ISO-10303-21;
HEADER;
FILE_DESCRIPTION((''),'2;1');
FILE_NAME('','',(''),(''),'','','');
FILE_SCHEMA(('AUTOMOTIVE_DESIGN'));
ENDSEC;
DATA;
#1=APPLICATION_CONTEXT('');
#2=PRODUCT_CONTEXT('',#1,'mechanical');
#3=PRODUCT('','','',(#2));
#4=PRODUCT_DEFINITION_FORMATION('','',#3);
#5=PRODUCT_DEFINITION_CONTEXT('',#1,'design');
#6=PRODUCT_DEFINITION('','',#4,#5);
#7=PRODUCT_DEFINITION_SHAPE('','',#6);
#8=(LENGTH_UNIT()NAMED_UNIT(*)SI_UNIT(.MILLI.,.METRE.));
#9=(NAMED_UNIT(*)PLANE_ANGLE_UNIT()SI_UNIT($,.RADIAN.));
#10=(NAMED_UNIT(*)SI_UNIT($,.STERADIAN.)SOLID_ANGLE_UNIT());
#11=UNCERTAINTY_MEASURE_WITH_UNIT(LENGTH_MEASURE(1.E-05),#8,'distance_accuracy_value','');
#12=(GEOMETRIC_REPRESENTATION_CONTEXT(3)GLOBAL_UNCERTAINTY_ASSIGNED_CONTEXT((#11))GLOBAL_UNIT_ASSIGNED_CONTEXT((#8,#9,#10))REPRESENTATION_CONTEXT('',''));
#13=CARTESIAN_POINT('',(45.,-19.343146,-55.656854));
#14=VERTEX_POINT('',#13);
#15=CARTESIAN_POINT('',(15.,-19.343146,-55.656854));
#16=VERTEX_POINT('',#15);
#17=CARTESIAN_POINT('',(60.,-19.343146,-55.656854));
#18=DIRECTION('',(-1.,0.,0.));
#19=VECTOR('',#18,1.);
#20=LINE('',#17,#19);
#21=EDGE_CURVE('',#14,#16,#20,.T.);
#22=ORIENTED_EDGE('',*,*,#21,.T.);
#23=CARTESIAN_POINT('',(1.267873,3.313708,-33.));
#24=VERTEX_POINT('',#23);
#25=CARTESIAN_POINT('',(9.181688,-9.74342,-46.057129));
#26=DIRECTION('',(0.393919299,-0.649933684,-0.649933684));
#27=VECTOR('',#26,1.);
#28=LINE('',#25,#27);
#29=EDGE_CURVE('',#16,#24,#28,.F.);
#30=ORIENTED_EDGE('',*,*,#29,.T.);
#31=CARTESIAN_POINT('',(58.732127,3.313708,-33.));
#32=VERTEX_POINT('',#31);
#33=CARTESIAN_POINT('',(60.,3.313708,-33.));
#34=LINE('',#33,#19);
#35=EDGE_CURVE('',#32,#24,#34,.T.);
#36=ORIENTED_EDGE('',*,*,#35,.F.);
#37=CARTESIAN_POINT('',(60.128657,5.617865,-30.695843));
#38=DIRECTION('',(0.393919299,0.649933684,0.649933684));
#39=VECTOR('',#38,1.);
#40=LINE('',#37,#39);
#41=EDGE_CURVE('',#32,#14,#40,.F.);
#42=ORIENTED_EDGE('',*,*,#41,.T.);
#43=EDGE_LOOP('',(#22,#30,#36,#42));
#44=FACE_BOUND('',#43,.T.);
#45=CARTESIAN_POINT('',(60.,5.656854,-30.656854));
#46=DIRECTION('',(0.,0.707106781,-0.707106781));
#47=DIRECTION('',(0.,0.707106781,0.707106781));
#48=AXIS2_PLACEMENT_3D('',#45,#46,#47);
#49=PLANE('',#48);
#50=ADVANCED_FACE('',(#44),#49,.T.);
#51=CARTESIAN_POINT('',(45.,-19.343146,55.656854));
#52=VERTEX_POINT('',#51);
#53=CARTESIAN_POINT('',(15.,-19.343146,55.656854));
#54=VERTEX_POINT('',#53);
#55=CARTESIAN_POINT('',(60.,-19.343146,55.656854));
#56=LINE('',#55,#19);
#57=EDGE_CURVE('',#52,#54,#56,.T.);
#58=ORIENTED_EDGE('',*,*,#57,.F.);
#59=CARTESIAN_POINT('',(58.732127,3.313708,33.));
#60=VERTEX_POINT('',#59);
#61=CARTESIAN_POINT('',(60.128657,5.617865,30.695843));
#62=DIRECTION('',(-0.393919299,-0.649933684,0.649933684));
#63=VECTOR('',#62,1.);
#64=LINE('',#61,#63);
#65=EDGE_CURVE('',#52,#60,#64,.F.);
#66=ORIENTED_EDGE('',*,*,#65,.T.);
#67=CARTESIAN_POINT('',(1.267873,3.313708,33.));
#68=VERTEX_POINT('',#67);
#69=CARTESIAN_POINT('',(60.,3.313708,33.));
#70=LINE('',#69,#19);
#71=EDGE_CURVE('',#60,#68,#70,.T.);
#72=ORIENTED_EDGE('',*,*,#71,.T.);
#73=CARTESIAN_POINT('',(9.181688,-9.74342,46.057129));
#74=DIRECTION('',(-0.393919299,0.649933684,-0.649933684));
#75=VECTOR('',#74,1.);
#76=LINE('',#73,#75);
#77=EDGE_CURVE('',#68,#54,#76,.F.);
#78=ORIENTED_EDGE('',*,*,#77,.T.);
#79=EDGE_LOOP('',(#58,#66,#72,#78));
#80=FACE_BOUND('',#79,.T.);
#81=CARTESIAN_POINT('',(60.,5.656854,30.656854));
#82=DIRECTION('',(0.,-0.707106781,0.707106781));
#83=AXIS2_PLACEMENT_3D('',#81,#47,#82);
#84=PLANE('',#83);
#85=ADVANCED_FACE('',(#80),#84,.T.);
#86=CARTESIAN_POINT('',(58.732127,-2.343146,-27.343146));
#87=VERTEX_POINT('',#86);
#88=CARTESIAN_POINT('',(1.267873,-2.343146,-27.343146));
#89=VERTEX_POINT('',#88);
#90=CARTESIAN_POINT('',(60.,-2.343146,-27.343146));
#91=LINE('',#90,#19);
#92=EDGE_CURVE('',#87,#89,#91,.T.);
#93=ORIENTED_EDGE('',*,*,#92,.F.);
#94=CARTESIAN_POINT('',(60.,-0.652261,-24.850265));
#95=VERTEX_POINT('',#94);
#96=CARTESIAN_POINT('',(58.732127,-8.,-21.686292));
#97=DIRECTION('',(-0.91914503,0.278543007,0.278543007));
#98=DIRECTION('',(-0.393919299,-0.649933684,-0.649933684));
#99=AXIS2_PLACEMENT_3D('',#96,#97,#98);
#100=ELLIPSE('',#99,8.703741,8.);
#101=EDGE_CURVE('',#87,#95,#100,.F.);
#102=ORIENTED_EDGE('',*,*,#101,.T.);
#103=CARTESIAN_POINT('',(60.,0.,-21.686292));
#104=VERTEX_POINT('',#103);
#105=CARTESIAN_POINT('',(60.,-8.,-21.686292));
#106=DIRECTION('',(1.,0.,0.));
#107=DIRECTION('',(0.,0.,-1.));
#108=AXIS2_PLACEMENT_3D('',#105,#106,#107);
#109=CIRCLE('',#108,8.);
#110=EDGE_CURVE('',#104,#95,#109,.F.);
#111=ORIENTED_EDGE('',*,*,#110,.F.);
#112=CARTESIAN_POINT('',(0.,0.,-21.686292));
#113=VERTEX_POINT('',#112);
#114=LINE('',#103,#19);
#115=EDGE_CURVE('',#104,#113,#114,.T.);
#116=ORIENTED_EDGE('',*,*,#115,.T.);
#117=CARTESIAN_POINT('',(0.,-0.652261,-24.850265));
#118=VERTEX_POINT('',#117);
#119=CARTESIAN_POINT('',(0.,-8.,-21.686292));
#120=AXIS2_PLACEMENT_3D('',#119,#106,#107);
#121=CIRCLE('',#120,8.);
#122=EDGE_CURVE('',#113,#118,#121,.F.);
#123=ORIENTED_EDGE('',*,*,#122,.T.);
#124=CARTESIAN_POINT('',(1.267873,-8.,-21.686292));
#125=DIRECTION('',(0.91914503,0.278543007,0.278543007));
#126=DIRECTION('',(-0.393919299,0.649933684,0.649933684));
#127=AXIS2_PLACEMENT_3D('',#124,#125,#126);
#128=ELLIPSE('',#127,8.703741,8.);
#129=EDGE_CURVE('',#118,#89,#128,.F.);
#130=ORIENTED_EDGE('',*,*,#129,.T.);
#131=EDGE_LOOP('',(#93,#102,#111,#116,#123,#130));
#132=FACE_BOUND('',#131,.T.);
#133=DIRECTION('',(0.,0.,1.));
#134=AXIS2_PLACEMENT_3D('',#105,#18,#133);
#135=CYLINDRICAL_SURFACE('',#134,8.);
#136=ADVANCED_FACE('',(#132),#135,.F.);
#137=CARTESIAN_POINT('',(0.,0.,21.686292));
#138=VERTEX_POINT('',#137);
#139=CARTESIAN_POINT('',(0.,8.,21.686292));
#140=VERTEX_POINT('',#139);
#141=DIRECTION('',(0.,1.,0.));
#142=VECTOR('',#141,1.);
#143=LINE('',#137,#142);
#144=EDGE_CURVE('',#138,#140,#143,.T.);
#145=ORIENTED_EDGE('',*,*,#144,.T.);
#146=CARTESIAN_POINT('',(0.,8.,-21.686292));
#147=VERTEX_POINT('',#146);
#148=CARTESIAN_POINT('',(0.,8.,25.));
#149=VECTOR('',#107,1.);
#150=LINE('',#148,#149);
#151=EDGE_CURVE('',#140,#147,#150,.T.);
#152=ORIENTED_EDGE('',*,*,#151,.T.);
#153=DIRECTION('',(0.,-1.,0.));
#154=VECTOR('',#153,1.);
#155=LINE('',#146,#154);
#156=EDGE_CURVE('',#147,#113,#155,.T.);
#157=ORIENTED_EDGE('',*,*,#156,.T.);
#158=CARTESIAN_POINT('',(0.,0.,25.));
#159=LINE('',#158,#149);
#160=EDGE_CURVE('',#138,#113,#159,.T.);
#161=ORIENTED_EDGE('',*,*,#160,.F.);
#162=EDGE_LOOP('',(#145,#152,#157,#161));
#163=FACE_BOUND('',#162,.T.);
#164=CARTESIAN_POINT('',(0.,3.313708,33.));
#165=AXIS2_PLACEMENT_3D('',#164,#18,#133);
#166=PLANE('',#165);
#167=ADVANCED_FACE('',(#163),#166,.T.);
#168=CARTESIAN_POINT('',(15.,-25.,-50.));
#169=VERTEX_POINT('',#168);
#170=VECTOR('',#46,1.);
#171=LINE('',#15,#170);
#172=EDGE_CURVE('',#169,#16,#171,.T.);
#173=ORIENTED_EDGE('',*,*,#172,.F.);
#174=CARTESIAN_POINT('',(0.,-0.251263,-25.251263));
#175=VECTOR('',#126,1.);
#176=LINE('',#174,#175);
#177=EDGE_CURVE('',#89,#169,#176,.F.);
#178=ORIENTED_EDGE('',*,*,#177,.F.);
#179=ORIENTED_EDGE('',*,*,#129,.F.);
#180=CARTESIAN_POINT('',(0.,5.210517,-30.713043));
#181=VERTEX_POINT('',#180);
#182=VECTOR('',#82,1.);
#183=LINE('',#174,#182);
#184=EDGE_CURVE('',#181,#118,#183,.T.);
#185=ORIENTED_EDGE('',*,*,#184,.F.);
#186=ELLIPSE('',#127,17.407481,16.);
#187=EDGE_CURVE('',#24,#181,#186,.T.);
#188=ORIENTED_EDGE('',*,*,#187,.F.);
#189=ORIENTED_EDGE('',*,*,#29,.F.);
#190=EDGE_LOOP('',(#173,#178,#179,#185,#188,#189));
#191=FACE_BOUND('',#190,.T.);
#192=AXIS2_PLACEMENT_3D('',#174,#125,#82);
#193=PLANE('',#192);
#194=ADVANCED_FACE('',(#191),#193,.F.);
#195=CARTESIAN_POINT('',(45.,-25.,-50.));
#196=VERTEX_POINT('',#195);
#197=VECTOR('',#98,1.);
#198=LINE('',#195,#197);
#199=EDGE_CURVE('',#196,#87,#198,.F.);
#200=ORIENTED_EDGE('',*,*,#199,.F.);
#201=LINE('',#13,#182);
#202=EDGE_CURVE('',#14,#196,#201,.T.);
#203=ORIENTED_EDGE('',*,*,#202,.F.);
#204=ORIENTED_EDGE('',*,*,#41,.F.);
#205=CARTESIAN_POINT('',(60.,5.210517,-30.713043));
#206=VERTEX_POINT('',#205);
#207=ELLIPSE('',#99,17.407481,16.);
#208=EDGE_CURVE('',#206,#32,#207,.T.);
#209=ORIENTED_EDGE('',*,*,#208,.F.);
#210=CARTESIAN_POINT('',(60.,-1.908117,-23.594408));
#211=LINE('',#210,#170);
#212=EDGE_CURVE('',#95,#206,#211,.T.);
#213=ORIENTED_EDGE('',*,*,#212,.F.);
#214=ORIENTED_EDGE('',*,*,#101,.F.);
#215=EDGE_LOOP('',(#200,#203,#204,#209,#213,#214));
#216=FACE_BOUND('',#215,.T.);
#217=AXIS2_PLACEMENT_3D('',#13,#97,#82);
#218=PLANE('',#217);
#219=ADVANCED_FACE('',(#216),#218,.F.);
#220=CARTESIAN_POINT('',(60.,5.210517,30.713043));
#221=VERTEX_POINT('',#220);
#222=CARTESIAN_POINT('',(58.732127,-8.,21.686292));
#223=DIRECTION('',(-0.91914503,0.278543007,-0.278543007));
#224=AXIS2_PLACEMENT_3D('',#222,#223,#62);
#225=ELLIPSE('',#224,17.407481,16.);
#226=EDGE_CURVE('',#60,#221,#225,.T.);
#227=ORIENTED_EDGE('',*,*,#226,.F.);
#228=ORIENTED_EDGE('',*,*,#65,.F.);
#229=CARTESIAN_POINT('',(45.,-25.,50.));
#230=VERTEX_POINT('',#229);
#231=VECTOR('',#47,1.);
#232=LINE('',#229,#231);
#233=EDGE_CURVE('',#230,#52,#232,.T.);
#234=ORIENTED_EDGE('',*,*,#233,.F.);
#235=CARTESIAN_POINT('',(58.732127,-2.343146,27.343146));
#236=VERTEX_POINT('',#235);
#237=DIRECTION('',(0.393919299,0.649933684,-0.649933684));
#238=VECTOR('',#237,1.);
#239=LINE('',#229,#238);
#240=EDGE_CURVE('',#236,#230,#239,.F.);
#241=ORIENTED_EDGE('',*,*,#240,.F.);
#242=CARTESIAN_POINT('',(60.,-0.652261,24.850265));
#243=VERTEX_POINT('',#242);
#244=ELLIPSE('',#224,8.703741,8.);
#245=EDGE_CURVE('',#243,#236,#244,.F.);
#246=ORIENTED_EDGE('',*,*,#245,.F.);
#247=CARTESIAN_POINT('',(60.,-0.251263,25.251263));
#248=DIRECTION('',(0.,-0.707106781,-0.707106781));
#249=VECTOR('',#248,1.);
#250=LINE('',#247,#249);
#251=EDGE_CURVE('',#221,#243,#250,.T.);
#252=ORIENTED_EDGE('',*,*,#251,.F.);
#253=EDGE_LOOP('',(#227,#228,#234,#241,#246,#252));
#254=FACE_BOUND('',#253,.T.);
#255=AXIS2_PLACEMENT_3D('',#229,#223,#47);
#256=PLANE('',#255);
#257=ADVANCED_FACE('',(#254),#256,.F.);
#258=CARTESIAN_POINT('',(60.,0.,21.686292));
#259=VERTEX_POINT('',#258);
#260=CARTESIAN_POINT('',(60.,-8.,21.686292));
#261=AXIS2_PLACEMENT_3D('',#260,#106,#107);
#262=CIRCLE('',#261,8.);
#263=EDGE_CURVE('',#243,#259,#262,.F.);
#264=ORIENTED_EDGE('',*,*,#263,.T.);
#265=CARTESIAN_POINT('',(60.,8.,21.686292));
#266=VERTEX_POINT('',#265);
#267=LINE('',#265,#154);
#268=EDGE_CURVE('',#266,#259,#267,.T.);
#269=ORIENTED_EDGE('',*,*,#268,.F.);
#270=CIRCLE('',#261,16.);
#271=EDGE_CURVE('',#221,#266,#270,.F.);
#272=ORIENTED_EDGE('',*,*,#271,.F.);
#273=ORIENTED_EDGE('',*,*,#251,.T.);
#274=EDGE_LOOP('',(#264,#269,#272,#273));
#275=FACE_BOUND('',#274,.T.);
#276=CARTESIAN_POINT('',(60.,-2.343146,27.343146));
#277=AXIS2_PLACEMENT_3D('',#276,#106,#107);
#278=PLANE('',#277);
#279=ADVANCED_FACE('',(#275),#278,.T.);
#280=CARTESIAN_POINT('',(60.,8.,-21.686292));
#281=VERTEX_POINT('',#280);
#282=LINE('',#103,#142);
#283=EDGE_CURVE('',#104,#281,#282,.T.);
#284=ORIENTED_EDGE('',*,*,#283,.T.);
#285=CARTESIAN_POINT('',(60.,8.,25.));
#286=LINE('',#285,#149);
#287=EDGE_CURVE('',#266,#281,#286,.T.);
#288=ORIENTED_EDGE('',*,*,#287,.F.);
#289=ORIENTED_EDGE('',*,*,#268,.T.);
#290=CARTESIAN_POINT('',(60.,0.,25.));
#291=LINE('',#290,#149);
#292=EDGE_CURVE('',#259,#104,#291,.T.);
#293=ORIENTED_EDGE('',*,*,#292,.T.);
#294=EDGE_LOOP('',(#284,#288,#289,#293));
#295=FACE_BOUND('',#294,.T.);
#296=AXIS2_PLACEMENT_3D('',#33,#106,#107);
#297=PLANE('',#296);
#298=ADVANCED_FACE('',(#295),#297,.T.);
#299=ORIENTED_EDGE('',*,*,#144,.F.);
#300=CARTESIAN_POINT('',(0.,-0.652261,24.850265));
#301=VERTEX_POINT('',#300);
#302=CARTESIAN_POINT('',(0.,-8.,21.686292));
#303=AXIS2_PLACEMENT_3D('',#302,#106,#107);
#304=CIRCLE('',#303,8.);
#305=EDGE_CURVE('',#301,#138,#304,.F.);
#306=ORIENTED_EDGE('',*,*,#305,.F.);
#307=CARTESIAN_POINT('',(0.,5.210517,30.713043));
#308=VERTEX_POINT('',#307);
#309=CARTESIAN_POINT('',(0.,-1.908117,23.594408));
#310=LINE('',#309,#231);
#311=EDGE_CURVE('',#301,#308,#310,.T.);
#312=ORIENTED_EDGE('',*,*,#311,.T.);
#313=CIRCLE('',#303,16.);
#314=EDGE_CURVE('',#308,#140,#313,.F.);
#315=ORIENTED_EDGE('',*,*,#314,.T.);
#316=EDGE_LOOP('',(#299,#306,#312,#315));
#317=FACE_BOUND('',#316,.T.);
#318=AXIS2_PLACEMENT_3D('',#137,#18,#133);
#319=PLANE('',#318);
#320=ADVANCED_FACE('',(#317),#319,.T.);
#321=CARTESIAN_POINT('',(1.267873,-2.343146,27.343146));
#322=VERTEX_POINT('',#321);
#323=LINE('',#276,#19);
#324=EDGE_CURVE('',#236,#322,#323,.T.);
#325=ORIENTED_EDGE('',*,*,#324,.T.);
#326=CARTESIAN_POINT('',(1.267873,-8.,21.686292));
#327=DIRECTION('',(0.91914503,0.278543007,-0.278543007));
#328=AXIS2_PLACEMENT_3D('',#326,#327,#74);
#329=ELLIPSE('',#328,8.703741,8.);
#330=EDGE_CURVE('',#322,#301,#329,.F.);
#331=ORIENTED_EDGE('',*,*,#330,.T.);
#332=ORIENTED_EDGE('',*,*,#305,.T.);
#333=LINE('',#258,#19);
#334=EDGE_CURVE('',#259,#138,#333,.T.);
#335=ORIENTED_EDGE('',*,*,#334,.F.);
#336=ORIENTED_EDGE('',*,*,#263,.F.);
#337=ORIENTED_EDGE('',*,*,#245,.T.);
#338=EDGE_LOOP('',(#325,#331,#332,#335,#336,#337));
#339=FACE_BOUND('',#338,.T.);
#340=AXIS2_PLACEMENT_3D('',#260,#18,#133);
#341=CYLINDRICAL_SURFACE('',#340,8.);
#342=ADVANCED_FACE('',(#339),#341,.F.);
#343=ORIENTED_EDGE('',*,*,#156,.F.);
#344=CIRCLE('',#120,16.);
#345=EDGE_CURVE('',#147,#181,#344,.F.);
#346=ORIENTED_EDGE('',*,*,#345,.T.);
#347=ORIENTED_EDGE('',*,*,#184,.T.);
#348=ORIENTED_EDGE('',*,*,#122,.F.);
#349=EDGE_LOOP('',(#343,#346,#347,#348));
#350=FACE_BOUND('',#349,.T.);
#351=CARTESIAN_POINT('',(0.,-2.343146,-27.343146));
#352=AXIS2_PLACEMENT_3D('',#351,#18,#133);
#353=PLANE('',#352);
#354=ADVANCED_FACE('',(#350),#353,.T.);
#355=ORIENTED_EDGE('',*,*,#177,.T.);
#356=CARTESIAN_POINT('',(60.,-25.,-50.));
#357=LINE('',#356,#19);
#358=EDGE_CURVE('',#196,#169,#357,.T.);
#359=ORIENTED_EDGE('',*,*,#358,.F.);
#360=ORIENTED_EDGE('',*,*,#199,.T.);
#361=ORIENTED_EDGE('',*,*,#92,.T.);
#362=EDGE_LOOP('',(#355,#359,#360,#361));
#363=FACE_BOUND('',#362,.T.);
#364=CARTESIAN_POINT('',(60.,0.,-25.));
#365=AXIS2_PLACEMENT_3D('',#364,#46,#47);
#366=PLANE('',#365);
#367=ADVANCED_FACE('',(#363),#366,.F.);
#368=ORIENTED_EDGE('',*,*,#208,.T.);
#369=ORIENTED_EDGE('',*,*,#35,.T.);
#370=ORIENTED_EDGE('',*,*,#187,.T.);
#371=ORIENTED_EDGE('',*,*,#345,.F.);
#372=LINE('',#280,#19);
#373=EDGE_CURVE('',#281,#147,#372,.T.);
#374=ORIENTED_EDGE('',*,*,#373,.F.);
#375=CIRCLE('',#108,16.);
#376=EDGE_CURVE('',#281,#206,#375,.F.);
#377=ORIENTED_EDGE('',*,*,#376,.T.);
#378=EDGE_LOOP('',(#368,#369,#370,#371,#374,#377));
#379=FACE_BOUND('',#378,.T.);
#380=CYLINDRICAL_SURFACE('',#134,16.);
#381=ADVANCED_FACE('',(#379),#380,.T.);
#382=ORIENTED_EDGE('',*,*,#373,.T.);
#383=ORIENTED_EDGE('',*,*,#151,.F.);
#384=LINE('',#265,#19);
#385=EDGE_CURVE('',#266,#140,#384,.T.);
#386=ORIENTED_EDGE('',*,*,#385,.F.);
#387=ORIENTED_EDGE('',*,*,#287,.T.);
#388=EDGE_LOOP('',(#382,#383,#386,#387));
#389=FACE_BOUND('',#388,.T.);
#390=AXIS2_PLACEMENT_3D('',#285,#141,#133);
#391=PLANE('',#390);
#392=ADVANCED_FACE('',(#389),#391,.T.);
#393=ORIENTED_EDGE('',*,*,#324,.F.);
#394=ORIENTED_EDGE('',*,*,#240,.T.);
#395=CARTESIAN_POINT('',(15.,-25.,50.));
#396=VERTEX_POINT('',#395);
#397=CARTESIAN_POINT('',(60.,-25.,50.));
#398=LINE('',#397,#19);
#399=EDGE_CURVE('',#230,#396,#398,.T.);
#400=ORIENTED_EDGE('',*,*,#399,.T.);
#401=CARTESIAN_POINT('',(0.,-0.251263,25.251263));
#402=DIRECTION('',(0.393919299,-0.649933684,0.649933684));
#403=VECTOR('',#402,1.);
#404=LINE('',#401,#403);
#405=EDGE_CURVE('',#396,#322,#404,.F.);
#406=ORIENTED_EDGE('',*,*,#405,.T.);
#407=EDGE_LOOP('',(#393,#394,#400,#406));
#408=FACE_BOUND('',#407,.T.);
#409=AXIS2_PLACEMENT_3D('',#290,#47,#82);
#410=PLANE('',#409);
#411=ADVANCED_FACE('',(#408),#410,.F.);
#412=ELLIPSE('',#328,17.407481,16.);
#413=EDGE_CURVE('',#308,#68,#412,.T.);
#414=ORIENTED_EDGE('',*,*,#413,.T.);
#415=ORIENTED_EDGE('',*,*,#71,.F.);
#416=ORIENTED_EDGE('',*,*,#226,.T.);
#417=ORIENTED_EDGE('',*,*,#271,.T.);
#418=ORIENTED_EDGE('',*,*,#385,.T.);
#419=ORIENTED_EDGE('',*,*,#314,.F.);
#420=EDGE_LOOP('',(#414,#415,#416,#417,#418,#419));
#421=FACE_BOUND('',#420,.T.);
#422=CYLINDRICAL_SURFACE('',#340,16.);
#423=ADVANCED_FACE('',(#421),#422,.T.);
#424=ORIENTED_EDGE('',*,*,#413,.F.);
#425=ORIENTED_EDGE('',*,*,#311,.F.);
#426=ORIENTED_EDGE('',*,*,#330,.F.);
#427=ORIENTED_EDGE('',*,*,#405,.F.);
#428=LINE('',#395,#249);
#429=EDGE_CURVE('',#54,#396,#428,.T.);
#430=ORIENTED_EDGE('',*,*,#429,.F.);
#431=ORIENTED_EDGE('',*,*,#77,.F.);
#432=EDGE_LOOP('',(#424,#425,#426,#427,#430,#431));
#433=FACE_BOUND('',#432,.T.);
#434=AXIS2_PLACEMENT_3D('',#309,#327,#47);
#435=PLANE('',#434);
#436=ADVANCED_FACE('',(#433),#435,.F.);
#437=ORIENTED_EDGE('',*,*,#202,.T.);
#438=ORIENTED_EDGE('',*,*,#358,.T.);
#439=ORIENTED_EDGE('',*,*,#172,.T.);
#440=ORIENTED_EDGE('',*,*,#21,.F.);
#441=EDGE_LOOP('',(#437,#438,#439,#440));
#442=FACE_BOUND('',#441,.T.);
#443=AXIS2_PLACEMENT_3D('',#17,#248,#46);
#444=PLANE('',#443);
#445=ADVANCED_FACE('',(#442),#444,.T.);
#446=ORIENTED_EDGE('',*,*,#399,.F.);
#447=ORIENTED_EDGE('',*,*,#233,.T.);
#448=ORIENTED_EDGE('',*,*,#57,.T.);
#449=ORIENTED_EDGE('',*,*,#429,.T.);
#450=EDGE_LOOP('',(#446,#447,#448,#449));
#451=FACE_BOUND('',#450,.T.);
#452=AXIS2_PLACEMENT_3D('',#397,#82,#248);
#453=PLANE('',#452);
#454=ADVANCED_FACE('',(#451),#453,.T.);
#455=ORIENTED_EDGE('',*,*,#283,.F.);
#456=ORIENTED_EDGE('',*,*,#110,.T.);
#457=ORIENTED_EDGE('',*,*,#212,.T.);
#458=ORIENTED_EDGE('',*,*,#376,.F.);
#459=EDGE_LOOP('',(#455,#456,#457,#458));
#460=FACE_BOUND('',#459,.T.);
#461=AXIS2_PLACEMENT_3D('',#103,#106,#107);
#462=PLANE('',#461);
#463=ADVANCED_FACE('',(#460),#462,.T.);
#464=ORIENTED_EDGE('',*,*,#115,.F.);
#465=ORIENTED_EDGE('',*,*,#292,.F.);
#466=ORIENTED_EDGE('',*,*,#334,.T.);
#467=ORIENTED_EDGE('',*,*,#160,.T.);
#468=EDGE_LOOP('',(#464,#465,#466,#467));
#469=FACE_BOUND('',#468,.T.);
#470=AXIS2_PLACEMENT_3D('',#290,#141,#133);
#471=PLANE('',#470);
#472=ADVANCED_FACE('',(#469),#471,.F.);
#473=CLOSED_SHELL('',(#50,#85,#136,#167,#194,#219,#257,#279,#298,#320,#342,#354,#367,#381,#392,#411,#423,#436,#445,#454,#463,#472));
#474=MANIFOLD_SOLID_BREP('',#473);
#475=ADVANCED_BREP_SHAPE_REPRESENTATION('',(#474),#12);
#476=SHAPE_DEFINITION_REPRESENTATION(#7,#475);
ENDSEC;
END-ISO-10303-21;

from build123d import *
from OCP.BRepFilletAPI import BRepFilletAPI_MakeChamfer

# Parameters (mm, degrees)
SM_BASE_FLANGE_1_DEPTH = 60
CHAMFER_2_SIZE         = 35
CHAMFER_2_SIZE2        = 15
CHAMFER_3_SIZE         = 15
CHAMFER_3_SIZE2        = 35


# Sheet-metal steps are written as plain solids
with BuildPart() as part:
    # Sketch 1 → 基体-法兰1 (new body)
    with BuildSketch(Plane(origin=(0, 0, 0), x_dir=(0, 0, -1), z_dir=(1, 0, 0))):
        with BuildLine():
            Line((-50, -25), (-27.343145751, -2.343145751))
            ThreePointArc((-27.343145751, -2.343145751), (-24.74775896, -0.60896374), (-21.686291501, 0))
            Line((-21.686291501, 0), (21.686291501, 0))
            ThreePointArc((21.686291501, 0), (24.74775896, -0.60896374), (27.343145751, -2.343145751))
            Line((27.343145751, -2.343145751), (50, -25))
            Line((50, -25), (55.656854249, -19.343145751))
            Line((55.656854249, -19.343145751), (33, 3.313708499))
            ThreePointArc((33, 3.313708499), (27.809226419, 6.78207252), (21.686291501, 8))
            Line((21.686291501, 8), (-21.686291501, 8))
            ThreePointArc((-21.686291501, 8), (-27.809226419, 6.78207252), (-33, 3.313708499))
            Line((-33, 3.313708499), (-55.656854249, -19.343145751))
            Line((-55.656854249, -19.343145751), (-50, -25))
        make_face()
    extrude(amount=SM_BASE_FLANGE_1_DEPTH)

    # 倒角2
    chamfer_2_edges = [part.edges().sort_by_distance(p)[0] for p in [
        (60, -22.171572875, 52.828427125),
        (60, -22.171572875, -52.828427125),
    ]]
    chamfer_2_side = [part.faces().sort_by_distance(p)[0] for p in [
        (60, -8.83568579, 43.50745996),
    ]]
    chamfer(chamfer_2_edges, length=CHAMFER_2_SIZE, length2=CHAMFER_2_SIZE2, reference=chamfer_2_side[0])

    # 倒角3: one chamfer whose edges measure the first distance from different faces: ONE call of the kernel's chamfer builder (chamfer() names one face for all edges)
    chamfer_3_edges_1 = [part.edges().sort_by_distance(p)[0] for p in [
        (0, -22.171572875, 52.828427125),
    ]]
    chamfer_3_side_1 = [part.faces().sort_by_distance(p)[0] for p in [
        (22.5, -22.171572875, 52.828427125),
    ]]
    chamfer_3_edges_2 = [part.edges().sort_by_distance(p)[0] for p in [
        (0, -22.171572875, -52.828427125),
    ]]
    chamfer_3_side_2 = [part.faces().sort_by_distance(p)[0] for p in [
        (22.5, -22.171572875, -52.828427125),
    ]]
    chamfer_3 = BRepFilletAPI_MakeChamfer(part.part.solid().wrapped)
    for e in chamfer_3_edges_1:
        chamfer_3.Add(CHAMFER_3_SIZE, CHAMFER_3_SIZE2, e.wrapped, chamfer_3_side_1[0].wrapped)  # the first distance lies on this face
    for e in chamfer_3_edges_2:
        chamfer_3.Add(CHAMFER_3_SIZE, CHAMFER_3_SIZE2, e.wrapped, chamfer_3_side_2[0].wrapped)  # the first distance lies on this face
    add(Compound.cast(chamfer_3.Shape()), mode=Mode.REPLACE)


solid = part.part
